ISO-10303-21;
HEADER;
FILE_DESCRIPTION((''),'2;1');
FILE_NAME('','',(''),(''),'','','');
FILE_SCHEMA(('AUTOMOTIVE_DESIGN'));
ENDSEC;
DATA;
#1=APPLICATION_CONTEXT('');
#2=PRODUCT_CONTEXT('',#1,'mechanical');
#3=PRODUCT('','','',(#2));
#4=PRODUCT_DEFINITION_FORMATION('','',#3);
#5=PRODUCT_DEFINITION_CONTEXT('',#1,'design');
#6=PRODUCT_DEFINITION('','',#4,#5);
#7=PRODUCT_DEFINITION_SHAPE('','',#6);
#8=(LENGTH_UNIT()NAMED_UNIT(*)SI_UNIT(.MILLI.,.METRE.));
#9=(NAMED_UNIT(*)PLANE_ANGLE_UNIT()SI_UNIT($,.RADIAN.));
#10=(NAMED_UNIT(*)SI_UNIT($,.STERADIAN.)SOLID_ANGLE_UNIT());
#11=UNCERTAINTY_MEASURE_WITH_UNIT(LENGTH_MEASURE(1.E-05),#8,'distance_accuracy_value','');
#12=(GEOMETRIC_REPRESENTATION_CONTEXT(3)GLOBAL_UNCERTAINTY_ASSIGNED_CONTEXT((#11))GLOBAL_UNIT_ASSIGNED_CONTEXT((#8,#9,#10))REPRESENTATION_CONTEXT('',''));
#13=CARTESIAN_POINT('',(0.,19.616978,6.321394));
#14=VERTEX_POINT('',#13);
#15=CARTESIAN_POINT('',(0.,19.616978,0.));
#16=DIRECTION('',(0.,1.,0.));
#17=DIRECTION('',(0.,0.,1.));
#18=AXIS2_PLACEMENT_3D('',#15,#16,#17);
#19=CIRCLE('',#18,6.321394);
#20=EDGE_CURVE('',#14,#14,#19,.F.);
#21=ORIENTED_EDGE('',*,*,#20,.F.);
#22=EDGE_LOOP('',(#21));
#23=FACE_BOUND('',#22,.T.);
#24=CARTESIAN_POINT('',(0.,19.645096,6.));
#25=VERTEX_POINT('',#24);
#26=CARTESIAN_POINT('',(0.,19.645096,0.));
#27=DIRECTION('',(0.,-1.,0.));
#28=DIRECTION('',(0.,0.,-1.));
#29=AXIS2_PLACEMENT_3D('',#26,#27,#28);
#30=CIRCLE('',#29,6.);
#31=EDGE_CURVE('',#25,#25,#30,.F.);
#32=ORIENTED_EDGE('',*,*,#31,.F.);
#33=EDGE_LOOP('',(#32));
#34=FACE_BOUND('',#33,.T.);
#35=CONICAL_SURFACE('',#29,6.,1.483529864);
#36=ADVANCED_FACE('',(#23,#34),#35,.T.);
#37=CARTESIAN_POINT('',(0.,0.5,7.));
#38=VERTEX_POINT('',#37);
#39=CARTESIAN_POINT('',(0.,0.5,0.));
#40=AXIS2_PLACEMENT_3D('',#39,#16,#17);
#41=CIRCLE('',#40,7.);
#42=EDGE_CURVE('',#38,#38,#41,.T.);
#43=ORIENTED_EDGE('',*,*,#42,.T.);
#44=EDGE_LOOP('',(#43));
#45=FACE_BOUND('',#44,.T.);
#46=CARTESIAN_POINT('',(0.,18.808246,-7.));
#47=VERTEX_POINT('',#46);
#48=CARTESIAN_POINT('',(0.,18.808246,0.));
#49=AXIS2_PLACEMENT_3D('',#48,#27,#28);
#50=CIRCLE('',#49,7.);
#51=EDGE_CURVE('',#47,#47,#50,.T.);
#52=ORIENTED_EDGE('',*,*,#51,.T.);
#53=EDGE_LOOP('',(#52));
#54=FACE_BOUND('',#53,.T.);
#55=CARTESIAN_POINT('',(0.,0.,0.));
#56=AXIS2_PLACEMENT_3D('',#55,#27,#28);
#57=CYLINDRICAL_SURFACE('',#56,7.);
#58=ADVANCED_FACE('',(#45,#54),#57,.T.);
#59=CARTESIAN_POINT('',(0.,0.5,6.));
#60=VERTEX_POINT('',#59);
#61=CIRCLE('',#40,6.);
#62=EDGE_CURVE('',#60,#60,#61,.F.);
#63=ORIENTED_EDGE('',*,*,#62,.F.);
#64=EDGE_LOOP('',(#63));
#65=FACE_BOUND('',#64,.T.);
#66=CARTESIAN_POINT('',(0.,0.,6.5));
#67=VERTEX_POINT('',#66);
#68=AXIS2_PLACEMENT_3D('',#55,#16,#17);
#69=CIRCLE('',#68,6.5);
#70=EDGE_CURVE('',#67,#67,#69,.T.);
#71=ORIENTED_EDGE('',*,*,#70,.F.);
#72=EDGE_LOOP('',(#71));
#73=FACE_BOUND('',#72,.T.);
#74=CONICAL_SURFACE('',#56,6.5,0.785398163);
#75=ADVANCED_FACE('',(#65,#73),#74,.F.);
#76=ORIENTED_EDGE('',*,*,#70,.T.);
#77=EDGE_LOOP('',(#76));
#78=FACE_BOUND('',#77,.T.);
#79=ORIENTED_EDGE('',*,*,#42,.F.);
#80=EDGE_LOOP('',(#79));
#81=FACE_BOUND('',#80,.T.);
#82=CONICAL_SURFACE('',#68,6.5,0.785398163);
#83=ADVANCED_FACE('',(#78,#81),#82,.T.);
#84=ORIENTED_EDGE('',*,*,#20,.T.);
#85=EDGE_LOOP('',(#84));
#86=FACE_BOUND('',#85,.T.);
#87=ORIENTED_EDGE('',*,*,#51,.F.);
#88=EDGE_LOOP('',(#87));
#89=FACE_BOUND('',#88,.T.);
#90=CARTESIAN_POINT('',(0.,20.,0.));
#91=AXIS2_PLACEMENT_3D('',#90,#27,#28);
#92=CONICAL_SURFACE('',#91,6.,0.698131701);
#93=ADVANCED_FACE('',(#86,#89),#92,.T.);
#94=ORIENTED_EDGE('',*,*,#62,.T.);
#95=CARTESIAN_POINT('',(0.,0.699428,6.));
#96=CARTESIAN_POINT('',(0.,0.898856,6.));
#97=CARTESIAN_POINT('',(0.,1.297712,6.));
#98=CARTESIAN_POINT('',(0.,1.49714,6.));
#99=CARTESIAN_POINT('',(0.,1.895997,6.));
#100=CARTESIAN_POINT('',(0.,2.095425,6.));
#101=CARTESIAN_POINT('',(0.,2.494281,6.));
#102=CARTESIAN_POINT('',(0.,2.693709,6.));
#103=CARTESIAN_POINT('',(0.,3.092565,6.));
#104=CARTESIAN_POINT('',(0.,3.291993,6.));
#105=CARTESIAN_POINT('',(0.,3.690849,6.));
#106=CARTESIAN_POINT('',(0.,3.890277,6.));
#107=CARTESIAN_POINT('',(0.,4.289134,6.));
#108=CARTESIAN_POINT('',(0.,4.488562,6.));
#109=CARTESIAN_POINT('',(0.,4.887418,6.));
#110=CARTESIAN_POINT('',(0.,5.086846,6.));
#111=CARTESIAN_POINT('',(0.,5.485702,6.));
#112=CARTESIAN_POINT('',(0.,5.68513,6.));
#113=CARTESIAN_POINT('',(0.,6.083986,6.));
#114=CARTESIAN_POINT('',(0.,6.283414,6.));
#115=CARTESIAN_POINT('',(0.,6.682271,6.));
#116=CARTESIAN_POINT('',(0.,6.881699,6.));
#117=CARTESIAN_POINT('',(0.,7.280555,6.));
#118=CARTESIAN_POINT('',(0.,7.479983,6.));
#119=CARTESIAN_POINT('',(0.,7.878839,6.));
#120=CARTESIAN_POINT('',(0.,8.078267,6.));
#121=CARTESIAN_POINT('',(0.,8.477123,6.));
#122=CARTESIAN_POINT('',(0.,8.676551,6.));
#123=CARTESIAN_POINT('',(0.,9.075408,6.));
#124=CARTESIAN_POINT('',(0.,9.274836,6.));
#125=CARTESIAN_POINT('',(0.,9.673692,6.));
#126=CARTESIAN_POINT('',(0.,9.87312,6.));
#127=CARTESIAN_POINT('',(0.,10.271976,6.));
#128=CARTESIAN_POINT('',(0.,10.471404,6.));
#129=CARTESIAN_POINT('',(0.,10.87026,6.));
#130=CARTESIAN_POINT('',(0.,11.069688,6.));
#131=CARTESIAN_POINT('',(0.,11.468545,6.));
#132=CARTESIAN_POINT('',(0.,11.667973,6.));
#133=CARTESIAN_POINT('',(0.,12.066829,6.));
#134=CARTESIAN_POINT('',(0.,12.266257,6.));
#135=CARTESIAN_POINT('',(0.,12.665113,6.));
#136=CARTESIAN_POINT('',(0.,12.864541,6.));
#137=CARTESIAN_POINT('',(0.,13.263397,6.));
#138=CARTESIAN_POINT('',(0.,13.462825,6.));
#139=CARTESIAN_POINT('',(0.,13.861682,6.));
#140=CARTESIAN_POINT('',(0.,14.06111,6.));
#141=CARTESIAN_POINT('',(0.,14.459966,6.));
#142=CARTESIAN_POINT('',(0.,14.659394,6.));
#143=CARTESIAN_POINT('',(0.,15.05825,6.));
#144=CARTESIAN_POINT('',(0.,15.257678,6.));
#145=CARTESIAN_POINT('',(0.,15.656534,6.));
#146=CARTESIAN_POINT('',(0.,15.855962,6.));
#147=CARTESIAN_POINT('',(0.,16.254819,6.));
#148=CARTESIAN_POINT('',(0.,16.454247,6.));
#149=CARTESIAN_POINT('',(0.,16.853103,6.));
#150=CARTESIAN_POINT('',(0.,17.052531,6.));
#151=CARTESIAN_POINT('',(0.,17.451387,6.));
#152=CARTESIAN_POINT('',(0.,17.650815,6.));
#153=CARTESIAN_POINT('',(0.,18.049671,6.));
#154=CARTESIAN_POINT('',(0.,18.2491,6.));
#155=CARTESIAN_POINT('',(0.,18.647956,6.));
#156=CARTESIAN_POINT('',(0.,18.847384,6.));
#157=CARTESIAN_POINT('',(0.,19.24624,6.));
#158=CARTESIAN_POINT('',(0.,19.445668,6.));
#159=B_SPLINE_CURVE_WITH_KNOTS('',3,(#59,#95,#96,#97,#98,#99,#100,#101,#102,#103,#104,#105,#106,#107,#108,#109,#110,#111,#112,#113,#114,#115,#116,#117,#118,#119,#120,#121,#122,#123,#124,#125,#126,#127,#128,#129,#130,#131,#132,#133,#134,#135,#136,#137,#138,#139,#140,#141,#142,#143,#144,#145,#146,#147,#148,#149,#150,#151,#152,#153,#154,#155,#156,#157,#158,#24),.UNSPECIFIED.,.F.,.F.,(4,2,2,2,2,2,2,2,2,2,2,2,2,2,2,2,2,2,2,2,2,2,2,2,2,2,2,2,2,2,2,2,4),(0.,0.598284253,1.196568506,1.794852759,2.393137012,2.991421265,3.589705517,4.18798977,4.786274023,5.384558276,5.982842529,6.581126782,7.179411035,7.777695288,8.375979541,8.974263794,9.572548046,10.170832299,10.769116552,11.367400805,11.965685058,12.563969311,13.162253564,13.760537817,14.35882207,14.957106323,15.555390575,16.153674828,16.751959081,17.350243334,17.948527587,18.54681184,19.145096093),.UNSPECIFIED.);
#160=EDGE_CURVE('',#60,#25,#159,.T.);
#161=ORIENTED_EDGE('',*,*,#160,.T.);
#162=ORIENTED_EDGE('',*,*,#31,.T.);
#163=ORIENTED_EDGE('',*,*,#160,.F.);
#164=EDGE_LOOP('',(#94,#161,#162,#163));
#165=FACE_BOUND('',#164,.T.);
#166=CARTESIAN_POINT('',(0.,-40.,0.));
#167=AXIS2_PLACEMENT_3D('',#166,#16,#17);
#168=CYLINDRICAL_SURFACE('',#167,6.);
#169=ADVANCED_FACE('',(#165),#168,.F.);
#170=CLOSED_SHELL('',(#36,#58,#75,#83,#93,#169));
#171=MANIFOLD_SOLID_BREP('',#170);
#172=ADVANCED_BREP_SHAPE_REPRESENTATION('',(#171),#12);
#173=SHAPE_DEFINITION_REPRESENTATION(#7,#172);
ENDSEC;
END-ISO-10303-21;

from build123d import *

# Parameters (mm, degrees)
CROQUIS2_R            = 6
CORTAR_EXTRUIR1_DEPTH = 60
CHAFL_N2_SIZE         = 0.5
CHAFL_N2_SIZE_2       = 0.354903907


with BuildPart() as part:
    # Croquis1 → Revolución1 (revolve)
    with BuildSketch(Plane.XY, mode=Mode.PRIVATE) as revoluci_n1_sk:
        Polygon((-7, 18.808246407), (-7, 0), (0, 0), (0, 20), (-6, 20), align=None)
    revolve(revoluci_n1_sk.sketch.rotate(Axis((0, 0, 0), (0, 1, 0)), 270), axis=Axis((0, 0, 0), (0, 1, 0)))

    # Croquis2 → Cortar-Extruir1 (cut)
    with BuildSketch(Plane(origin=(0, 20, 0), x_dir=(1, 0, 0), z_dir=(0, 1, 0))):
        with Locations(Location((0, 0, 0), (0, 0, 270))):
            Circle(CROQUIS2_R)
    extrude(amount=-CORTAR_EXTRUIR1_DEPTH, mode=Mode.SUBTRACT)

    # Chaflán2
    # the kernel refuses this chamfer: 0.5, 0.354903907 mm, written as the material it takes off along each edge
    with BuildSketch(Plane(origin=(0, 0, 0), x_dir=(0, 0, 1), z_dir=(-1, 0, 0))) as chafl_n2_piece_1:
        Polygon((6 + CHAFL_N2_SIZE, 0), (6, CHAFL_N2_SIZE), (6, 0), align=None)
    revolve(axis=Axis((0, 0, 0), (0, 1, 0)), mode=Mode.SUBTRACT)
    with BuildSketch(Plane(origin=(0, 0, 0), x_dir=(0, 0, -1), z_dir=(1, 0, 0))) as chafl_n2_piece_2:
        Polygon((7, CHAFL_N2_SIZE), (7 - CHAFL_N2_SIZE, 0), (7, 0), align=None)
    revolve(axis=Axis((0, 0, 0), (0, 1, 0)), mode=Mode.SUBTRACT)
    with BuildSketch(Plane(origin=(0, 20, 0), x_dir=(0, 0, 1), z_dir=(-1, 0, 0))) as chafl_n2_piece_3:
        Polygon((6 + CHAFL_N2_SIZE * 0.642787609687, -CHAFL_N2_SIZE * 0.766044443119), (6, -CHAFL_N2_SIZE_2), (6, 0), align=None)
    revolve(axis=Axis((0, 20, 0), (0, 1, 0)), revolution_arc=180, mode=Mode.SUBTRACT)
    with BuildSketch(Plane(origin=(0, 20, 0), x_dir=(0, 0, -1), z_dir=(1, 0, 0))) as chafl_n2_piece_4:
        Polygon((6 + CHAFL_N2_SIZE * 0.642787609687, -CHAFL_N2_SIZE * 0.766044443119), (6, -CHAFL_N2_SIZE_2), (6, 0), align=None)
    revolve(axis=Axis((0, 20, 0), (0, 1, 0)), revolution_arc=180, mode=Mode.SUBTRACT)


solid = part.part
